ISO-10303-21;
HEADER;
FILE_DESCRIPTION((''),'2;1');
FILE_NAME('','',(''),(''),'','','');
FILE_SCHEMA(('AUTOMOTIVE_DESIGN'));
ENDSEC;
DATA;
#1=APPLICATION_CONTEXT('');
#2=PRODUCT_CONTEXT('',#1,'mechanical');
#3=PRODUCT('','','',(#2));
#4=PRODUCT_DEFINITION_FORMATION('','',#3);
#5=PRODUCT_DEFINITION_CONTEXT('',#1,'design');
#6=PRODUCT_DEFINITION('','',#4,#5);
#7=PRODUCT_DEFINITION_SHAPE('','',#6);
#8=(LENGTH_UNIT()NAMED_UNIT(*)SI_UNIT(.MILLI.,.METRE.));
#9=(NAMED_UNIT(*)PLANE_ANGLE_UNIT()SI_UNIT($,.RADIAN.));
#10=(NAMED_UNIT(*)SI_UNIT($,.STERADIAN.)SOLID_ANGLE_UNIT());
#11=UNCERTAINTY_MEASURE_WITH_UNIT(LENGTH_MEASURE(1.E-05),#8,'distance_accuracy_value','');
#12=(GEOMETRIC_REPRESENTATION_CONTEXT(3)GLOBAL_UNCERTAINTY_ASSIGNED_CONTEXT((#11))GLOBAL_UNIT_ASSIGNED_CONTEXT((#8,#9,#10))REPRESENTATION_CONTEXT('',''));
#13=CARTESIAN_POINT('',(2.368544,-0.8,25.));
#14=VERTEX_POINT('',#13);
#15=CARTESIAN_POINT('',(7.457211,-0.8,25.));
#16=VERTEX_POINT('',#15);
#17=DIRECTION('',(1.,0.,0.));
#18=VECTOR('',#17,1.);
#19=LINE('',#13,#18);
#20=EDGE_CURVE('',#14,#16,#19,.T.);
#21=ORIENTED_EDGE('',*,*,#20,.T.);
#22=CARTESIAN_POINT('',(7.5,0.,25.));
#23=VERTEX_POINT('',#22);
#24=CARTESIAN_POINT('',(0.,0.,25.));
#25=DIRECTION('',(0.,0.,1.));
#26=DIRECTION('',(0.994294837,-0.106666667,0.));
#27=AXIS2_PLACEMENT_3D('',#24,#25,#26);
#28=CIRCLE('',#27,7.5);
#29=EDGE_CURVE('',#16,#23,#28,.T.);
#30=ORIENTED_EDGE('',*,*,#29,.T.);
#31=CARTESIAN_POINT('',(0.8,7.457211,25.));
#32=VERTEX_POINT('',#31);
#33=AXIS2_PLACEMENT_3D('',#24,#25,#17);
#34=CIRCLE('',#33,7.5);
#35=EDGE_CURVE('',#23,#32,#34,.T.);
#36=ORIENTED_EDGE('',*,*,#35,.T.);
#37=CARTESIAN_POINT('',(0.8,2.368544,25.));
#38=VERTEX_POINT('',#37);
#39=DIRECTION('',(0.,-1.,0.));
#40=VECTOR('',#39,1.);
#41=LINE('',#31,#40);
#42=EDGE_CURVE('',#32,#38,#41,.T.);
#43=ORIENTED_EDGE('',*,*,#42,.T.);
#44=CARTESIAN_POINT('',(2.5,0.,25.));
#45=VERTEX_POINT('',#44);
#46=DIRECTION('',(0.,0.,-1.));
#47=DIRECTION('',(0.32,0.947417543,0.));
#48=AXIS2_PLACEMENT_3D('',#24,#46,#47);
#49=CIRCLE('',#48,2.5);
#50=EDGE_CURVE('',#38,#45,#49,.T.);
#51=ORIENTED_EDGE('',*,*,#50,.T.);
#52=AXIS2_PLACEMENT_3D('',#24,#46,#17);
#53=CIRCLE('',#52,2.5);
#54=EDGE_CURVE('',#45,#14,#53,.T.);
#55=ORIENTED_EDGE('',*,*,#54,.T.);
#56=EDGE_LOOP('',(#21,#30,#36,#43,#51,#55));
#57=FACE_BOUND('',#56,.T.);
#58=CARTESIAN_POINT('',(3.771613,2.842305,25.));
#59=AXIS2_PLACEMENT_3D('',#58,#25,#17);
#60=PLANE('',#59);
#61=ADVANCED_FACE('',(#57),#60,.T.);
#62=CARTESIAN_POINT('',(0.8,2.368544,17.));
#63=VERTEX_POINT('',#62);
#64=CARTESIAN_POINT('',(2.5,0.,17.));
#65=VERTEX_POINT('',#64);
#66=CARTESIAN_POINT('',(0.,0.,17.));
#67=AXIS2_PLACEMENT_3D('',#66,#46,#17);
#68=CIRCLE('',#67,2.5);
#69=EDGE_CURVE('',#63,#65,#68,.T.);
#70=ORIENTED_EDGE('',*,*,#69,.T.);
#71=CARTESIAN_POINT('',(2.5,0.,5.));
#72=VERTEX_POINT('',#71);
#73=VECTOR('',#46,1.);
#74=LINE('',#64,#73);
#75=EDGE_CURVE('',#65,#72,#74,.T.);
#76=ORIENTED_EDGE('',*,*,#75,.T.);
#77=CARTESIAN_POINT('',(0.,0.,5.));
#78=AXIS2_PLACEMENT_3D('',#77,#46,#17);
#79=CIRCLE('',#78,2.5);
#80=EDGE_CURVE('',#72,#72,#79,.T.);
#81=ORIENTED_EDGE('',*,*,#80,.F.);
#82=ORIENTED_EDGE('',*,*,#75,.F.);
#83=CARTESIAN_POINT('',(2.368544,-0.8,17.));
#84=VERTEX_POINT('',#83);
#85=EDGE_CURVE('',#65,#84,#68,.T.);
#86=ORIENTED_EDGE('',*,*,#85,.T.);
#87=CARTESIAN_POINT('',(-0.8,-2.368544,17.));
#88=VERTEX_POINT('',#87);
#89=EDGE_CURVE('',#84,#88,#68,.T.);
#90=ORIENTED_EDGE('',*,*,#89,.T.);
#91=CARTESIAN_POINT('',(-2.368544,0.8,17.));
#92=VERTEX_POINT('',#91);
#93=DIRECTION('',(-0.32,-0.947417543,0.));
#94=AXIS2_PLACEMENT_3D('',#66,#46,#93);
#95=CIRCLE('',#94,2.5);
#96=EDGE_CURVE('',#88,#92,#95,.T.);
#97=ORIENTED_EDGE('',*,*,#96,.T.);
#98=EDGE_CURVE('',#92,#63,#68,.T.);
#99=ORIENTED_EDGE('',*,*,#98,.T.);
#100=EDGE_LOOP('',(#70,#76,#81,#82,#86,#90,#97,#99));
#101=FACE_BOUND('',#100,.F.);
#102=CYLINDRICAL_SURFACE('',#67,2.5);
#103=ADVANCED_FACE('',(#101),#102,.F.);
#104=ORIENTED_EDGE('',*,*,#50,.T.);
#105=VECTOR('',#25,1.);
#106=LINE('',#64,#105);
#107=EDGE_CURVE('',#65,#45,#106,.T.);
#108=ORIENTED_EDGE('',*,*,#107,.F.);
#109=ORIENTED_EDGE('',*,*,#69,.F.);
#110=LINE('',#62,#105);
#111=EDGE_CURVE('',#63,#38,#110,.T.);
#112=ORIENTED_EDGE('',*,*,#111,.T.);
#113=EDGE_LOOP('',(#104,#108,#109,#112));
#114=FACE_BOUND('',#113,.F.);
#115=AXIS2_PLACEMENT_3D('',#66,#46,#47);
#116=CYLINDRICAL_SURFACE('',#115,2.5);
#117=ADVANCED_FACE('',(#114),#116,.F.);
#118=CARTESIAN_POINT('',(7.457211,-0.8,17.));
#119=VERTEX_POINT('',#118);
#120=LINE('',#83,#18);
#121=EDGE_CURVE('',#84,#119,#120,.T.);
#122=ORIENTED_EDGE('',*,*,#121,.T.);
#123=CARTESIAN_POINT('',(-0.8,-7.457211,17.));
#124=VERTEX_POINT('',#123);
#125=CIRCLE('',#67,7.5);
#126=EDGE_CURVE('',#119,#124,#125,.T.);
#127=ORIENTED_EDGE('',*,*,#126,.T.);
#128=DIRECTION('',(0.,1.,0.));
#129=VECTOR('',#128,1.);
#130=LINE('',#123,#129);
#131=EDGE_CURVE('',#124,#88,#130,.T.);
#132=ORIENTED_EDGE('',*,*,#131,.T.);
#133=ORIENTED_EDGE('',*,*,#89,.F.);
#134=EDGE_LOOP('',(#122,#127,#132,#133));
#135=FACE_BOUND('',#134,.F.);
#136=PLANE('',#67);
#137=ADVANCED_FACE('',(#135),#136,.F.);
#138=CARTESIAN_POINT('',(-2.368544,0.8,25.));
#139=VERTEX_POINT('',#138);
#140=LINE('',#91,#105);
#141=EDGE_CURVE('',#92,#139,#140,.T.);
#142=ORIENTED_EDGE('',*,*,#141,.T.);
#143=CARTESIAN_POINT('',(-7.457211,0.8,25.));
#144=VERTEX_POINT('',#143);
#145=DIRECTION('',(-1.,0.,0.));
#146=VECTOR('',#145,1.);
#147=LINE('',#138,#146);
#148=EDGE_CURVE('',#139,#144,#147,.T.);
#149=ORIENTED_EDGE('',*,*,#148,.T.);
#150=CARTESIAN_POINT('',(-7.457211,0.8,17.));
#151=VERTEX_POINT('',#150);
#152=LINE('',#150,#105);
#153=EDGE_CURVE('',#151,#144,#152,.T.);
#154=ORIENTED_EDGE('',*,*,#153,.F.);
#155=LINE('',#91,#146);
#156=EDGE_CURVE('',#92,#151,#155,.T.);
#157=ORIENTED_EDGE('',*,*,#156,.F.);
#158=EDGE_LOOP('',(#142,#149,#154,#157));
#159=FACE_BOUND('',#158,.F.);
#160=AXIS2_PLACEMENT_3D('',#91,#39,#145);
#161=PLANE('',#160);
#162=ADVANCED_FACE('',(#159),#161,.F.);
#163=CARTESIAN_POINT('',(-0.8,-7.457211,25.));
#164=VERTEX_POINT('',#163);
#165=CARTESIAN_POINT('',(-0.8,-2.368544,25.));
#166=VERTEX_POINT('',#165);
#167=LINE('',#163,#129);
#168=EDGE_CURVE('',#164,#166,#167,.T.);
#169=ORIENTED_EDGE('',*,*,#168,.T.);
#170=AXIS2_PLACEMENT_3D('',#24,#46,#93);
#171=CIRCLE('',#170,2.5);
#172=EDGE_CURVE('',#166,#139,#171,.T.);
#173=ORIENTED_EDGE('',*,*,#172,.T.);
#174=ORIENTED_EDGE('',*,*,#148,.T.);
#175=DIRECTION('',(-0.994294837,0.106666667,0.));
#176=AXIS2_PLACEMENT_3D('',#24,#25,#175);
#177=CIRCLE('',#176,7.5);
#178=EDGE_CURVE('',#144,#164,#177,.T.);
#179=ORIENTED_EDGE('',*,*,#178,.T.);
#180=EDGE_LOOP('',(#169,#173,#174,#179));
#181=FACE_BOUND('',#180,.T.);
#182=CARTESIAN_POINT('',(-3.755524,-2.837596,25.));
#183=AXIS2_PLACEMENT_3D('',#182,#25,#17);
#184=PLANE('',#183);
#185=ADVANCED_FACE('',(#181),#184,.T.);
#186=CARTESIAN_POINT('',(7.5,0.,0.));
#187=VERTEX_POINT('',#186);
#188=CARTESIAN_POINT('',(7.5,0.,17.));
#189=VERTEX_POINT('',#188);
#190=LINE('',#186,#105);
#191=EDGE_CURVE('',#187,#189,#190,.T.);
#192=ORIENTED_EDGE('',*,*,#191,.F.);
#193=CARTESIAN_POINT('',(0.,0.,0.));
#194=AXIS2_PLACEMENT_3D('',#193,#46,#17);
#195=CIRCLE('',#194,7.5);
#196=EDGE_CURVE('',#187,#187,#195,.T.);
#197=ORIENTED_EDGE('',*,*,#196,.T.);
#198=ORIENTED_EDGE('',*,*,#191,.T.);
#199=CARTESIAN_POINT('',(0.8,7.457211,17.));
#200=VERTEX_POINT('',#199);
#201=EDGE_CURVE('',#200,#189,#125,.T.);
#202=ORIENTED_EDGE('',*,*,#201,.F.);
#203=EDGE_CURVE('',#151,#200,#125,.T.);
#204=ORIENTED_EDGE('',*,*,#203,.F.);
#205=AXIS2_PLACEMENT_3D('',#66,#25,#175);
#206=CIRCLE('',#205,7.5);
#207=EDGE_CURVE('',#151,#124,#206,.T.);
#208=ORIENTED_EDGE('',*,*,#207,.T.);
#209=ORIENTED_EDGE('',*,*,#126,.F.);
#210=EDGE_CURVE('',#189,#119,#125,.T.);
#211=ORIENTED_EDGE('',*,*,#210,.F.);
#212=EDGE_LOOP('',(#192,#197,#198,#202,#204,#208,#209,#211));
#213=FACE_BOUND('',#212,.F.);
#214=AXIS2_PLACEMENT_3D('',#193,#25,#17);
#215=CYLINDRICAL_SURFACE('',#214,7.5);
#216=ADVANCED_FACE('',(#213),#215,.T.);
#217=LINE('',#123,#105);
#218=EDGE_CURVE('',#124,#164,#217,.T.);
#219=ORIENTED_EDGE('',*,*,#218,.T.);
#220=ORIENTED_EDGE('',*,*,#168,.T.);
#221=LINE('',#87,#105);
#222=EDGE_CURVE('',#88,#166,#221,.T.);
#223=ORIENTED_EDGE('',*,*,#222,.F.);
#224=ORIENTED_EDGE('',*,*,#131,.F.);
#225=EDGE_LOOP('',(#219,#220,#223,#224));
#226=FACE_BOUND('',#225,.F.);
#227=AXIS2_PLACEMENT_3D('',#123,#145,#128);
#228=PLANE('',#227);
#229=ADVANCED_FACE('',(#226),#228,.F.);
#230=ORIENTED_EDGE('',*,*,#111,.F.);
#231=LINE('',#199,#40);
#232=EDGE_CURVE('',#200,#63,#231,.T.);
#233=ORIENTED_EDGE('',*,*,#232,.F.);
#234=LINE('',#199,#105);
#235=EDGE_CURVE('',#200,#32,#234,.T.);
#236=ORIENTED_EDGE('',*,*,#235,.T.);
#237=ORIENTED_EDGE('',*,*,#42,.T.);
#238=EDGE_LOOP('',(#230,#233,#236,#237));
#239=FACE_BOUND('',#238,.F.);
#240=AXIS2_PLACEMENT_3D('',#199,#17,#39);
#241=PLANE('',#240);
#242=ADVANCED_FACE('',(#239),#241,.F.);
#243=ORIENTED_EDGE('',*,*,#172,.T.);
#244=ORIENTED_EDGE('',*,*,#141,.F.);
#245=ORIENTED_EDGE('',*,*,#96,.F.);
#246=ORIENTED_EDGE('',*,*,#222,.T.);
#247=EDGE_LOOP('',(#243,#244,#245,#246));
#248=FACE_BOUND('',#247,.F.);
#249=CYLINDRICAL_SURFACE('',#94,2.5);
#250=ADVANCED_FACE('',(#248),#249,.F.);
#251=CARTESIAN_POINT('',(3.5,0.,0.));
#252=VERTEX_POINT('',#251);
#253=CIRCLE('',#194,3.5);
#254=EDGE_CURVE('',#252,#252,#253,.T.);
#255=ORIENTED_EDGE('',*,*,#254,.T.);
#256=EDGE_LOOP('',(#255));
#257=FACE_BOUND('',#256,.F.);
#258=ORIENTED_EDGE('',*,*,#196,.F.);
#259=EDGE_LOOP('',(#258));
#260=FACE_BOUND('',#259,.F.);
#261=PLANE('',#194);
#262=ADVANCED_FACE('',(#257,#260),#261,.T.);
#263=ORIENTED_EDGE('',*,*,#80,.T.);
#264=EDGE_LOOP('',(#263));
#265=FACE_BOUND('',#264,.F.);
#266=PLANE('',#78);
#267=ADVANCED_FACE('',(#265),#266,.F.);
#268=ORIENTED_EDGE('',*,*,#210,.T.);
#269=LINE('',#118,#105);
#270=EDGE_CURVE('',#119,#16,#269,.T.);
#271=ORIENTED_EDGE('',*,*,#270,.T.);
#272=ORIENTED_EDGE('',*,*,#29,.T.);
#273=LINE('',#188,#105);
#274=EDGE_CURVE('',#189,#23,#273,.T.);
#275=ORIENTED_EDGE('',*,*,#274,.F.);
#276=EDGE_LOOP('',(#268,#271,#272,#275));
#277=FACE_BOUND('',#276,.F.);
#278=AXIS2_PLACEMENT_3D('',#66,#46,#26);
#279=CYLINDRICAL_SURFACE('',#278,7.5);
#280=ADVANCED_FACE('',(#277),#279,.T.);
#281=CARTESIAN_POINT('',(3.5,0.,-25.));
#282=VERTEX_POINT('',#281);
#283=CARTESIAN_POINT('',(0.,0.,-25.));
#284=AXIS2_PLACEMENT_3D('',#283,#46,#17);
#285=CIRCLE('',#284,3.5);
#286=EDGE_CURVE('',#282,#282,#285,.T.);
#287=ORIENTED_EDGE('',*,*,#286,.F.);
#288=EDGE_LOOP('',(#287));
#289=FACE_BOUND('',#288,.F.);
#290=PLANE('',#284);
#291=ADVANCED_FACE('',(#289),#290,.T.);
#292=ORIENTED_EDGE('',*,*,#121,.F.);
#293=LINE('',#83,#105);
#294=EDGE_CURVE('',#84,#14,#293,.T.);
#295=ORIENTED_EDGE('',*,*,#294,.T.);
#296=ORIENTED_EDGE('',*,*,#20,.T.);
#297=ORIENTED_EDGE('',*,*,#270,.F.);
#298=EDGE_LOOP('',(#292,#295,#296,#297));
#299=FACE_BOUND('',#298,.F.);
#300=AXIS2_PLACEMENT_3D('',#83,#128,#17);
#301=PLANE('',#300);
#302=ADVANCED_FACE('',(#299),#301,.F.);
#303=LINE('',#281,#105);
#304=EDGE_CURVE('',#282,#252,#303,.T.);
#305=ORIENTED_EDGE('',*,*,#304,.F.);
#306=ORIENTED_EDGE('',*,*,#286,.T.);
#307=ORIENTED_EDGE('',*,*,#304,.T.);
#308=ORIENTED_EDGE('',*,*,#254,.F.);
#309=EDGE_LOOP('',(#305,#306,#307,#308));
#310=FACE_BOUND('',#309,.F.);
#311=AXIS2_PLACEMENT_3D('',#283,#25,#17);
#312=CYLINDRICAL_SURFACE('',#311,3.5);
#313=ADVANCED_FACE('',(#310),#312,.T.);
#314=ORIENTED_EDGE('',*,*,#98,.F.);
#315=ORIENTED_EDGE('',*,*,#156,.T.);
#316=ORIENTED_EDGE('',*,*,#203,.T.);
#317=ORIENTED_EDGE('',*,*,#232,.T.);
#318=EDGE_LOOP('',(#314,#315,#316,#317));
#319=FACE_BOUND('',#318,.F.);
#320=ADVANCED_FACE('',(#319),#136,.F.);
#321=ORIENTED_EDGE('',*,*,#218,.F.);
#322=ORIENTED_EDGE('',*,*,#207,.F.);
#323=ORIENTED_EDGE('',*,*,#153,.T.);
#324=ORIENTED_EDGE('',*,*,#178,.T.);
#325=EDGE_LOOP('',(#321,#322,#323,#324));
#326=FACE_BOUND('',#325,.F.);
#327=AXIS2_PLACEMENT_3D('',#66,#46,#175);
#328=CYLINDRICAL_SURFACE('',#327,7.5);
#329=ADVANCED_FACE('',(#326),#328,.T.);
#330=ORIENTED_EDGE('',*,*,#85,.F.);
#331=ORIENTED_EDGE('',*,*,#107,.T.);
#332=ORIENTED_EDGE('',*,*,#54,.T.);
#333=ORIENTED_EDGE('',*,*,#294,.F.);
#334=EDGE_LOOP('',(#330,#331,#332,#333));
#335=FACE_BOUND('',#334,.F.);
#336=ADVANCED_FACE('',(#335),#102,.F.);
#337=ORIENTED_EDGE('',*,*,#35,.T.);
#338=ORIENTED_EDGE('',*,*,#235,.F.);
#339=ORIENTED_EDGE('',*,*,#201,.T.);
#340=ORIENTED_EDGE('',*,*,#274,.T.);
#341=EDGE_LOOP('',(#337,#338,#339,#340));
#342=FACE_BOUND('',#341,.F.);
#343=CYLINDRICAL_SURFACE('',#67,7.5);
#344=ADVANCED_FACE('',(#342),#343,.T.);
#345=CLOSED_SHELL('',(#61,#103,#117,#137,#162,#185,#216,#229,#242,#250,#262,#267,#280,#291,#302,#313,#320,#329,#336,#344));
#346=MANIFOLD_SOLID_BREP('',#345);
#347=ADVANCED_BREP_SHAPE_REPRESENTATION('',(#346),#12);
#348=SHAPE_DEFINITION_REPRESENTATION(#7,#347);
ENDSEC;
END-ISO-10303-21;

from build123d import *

# Parameters (mm, degrees)
F3_DEPTH = 8


# Not quite as in the source:
# - after a boolean that leaves OpenCascade's solid faulty, fix() repairs it


with BuildPart() as f1:
    # F0 (on Front) → F1 (revolve)
    with BuildSketch(Plane.XZ):
        Polygon((2.5, 5), (0, 5), (0, -25), (3.5, -25), (3.5, 0), (7.5, 0), (7.5, 17), (2.5, 17), align=None)
    revolve(axis=Axis((0, 0, -10), (0, 0, -1)))

    # F2 (on face) → F3 (join)
    with BuildSketch(Plane.XY.offset(17)):
        with BuildLine():
            ThreePointArc((7.5, 0), (5.5789784011, 5.0124844139), (0.8, 7.457211275))
            Line((0.8, 7.457211275), (0.8, 2.3685438565))
            ThreePointArc((0.8, 2.3685438565), (2.0310096012, 1.4577379737), (2.5, 0))
            ThreePointArc((2.5, 0), (2.466917068, -0.4053642552), (2.3685438565, -0.8))
            Line((2.3685438565, -0.8), (7.457211275, -0.8))
            ThreePointArc((7.457211275, -0.8), (7.4892951792, -0.4005717398), (7.5, 0))
        make_face()
        with BuildLine():
            Line((-2.3685438565, 0.8), (-7.457211275, 0.8))
            ThreePointArc((-7.457211275, 0.8), (-5.8387300862, -4.7073592363), (-0.8, -7.457211275))
            Line((-0.8, -7.457211275), (-0.8, -2.3685438565))
            ThreePointArc((-0.8, -2.3685438565), (-2.2404988474, -1.1091279975), (-2.3685438565, 0.8))
        make_face()
    extrude(amount=F3_DEPTH)

    add(f1.part.fix(), mode=Mode.REPLACE)


solid = f1.part
